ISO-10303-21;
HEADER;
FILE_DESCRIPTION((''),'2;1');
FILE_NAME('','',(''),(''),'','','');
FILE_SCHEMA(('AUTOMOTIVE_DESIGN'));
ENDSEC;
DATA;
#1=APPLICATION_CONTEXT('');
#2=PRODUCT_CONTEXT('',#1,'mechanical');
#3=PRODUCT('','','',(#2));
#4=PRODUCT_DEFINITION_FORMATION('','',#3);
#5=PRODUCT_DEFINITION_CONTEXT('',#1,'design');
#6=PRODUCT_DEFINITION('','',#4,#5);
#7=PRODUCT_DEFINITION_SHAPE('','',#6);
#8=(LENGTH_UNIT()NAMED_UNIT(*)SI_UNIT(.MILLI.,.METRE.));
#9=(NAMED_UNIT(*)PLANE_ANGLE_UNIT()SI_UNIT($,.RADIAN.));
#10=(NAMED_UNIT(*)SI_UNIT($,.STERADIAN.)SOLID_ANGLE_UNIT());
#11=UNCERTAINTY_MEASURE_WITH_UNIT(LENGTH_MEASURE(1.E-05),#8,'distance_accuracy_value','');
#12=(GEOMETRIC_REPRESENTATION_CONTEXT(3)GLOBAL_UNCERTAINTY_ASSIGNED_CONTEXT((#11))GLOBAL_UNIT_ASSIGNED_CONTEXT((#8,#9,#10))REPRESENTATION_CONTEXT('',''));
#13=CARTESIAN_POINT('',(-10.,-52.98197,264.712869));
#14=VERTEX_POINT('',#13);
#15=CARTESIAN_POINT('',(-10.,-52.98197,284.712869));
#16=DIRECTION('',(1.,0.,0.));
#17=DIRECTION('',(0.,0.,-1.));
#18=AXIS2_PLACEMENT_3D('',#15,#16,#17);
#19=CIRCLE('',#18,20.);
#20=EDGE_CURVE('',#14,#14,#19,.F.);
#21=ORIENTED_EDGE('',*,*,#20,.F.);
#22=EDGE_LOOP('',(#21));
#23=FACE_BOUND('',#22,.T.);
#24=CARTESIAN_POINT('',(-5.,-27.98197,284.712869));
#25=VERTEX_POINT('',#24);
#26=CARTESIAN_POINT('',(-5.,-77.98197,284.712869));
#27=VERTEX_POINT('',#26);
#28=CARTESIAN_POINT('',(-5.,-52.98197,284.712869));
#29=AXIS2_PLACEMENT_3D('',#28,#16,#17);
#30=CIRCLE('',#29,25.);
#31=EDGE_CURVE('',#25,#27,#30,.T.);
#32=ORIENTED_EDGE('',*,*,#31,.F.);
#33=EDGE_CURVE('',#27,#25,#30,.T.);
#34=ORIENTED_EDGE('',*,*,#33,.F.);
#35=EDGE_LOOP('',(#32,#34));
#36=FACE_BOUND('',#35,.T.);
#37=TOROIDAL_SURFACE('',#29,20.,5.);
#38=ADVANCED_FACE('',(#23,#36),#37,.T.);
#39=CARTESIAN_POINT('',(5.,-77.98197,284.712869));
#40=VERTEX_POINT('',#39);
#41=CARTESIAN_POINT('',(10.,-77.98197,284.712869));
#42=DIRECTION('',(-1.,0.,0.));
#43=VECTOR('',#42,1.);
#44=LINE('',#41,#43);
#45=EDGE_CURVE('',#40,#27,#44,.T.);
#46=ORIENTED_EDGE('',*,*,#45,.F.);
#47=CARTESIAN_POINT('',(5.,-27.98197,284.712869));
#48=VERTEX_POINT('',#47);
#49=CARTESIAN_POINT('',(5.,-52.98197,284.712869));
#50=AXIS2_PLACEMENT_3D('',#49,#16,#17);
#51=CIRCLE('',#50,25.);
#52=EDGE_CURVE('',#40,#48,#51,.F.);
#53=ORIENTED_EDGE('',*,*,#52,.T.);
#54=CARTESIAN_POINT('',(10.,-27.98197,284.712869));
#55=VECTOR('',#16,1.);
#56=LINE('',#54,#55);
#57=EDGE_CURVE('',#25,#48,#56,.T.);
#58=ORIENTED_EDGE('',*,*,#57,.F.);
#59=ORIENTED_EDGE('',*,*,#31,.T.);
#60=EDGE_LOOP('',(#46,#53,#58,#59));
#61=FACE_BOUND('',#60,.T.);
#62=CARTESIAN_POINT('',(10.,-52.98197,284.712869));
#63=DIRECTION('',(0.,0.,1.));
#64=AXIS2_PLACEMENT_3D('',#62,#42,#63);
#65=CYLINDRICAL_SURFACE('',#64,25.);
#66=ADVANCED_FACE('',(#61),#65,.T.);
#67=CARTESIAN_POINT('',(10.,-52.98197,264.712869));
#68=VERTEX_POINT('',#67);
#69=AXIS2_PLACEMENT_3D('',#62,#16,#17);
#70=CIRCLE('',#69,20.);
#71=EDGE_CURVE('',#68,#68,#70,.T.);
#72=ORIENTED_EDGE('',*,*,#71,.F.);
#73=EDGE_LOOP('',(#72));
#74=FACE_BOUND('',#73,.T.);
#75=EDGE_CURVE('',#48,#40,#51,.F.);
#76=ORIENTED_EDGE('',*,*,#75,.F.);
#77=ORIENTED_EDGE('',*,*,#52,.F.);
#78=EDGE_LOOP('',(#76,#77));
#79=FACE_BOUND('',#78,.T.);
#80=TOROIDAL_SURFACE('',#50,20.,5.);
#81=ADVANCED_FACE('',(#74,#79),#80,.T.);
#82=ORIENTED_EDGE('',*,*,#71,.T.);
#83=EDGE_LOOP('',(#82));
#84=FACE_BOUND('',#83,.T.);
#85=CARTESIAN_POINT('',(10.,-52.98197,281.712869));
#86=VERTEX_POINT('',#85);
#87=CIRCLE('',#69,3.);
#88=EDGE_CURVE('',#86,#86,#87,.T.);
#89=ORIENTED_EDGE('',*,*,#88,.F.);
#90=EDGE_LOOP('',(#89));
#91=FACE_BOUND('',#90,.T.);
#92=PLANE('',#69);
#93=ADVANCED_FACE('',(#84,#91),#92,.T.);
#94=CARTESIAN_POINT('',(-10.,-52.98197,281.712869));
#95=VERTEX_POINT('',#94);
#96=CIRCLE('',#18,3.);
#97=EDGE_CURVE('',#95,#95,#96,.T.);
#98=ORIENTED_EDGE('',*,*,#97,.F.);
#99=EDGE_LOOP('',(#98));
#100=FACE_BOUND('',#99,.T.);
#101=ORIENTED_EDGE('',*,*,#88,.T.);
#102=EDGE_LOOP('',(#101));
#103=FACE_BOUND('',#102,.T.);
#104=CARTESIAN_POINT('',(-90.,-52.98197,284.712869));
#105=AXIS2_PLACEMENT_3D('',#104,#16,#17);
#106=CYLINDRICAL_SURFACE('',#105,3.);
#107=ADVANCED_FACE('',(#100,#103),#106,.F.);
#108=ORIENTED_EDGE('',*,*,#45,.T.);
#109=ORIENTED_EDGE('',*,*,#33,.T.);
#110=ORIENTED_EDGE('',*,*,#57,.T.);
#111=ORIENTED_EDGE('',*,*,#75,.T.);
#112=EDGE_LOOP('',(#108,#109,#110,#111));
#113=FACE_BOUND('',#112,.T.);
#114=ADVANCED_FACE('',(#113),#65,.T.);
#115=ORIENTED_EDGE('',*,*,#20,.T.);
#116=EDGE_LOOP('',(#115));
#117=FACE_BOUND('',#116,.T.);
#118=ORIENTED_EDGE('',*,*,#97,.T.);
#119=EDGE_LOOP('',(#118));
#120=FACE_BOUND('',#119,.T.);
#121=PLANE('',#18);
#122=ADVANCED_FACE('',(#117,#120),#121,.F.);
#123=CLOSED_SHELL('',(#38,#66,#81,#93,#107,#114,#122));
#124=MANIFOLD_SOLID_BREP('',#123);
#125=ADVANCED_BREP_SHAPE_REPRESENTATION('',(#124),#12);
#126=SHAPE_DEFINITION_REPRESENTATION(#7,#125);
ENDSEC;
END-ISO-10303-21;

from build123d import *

# Parameters (mm, degrees)
SKETCH5_R      = 2
EXTRUDE4_DEPTH = 100
SKETCH6_R      = 3
EXTRUDE5_DEPTH = 100


with BuildPart() as part:
    # Fillet4: read off the stored shape, not the designer's step
    # Fillet4 outline → Fillet4 (revolve)
    with BuildSketch(Plane(origin=(0, -52.981969609, 284.712869435), x_dir=(0, 1, 0), z_dir=(0, 0, -1))):
        with BuildLine():
            Line((25, -5), (25, 5))
            ThreePointArc((25, 5), (23.535533906, 8.535533906), (20, 10))
            Line((20, 10), (0, 10))
            Line((0, 10), (0, -10))
            Line((0, -10), (20, -10))
            ThreePointArc((20, -10), (23.535533906, -8.535533906), (25, -5))
        make_face()
    revolve(axis=Axis((0, -52.981969609, 284.712869435), (1, 0, 0)))

    # Sketch5 → Extrude4 (cut)
    with BuildSketch(Plane(origin=(10, 0, 0), x_dir=(0, 0, -1), z_dir=(1, 0, 0))):
        with Locations((-284.712869435, -52.981969609)):
            Circle(SKETCH5_R)
    extrude(amount=-EXTRUDE4_DEPTH, mode=Mode.SUBTRACT)

    # Sketch6 → Extrude5 (cut)
    with BuildSketch(Plane(origin=(10, 0, 0), x_dir=(0, 0, -1), z_dir=(1, 0, 0))):
        with Locations((-284.712869435, -52.981969609)):
            Circle(SKETCH6_R)
    extrude(amount=-EXTRUDE5_DEPTH, mode=Mode.SUBTRACT)


solid = part.part
